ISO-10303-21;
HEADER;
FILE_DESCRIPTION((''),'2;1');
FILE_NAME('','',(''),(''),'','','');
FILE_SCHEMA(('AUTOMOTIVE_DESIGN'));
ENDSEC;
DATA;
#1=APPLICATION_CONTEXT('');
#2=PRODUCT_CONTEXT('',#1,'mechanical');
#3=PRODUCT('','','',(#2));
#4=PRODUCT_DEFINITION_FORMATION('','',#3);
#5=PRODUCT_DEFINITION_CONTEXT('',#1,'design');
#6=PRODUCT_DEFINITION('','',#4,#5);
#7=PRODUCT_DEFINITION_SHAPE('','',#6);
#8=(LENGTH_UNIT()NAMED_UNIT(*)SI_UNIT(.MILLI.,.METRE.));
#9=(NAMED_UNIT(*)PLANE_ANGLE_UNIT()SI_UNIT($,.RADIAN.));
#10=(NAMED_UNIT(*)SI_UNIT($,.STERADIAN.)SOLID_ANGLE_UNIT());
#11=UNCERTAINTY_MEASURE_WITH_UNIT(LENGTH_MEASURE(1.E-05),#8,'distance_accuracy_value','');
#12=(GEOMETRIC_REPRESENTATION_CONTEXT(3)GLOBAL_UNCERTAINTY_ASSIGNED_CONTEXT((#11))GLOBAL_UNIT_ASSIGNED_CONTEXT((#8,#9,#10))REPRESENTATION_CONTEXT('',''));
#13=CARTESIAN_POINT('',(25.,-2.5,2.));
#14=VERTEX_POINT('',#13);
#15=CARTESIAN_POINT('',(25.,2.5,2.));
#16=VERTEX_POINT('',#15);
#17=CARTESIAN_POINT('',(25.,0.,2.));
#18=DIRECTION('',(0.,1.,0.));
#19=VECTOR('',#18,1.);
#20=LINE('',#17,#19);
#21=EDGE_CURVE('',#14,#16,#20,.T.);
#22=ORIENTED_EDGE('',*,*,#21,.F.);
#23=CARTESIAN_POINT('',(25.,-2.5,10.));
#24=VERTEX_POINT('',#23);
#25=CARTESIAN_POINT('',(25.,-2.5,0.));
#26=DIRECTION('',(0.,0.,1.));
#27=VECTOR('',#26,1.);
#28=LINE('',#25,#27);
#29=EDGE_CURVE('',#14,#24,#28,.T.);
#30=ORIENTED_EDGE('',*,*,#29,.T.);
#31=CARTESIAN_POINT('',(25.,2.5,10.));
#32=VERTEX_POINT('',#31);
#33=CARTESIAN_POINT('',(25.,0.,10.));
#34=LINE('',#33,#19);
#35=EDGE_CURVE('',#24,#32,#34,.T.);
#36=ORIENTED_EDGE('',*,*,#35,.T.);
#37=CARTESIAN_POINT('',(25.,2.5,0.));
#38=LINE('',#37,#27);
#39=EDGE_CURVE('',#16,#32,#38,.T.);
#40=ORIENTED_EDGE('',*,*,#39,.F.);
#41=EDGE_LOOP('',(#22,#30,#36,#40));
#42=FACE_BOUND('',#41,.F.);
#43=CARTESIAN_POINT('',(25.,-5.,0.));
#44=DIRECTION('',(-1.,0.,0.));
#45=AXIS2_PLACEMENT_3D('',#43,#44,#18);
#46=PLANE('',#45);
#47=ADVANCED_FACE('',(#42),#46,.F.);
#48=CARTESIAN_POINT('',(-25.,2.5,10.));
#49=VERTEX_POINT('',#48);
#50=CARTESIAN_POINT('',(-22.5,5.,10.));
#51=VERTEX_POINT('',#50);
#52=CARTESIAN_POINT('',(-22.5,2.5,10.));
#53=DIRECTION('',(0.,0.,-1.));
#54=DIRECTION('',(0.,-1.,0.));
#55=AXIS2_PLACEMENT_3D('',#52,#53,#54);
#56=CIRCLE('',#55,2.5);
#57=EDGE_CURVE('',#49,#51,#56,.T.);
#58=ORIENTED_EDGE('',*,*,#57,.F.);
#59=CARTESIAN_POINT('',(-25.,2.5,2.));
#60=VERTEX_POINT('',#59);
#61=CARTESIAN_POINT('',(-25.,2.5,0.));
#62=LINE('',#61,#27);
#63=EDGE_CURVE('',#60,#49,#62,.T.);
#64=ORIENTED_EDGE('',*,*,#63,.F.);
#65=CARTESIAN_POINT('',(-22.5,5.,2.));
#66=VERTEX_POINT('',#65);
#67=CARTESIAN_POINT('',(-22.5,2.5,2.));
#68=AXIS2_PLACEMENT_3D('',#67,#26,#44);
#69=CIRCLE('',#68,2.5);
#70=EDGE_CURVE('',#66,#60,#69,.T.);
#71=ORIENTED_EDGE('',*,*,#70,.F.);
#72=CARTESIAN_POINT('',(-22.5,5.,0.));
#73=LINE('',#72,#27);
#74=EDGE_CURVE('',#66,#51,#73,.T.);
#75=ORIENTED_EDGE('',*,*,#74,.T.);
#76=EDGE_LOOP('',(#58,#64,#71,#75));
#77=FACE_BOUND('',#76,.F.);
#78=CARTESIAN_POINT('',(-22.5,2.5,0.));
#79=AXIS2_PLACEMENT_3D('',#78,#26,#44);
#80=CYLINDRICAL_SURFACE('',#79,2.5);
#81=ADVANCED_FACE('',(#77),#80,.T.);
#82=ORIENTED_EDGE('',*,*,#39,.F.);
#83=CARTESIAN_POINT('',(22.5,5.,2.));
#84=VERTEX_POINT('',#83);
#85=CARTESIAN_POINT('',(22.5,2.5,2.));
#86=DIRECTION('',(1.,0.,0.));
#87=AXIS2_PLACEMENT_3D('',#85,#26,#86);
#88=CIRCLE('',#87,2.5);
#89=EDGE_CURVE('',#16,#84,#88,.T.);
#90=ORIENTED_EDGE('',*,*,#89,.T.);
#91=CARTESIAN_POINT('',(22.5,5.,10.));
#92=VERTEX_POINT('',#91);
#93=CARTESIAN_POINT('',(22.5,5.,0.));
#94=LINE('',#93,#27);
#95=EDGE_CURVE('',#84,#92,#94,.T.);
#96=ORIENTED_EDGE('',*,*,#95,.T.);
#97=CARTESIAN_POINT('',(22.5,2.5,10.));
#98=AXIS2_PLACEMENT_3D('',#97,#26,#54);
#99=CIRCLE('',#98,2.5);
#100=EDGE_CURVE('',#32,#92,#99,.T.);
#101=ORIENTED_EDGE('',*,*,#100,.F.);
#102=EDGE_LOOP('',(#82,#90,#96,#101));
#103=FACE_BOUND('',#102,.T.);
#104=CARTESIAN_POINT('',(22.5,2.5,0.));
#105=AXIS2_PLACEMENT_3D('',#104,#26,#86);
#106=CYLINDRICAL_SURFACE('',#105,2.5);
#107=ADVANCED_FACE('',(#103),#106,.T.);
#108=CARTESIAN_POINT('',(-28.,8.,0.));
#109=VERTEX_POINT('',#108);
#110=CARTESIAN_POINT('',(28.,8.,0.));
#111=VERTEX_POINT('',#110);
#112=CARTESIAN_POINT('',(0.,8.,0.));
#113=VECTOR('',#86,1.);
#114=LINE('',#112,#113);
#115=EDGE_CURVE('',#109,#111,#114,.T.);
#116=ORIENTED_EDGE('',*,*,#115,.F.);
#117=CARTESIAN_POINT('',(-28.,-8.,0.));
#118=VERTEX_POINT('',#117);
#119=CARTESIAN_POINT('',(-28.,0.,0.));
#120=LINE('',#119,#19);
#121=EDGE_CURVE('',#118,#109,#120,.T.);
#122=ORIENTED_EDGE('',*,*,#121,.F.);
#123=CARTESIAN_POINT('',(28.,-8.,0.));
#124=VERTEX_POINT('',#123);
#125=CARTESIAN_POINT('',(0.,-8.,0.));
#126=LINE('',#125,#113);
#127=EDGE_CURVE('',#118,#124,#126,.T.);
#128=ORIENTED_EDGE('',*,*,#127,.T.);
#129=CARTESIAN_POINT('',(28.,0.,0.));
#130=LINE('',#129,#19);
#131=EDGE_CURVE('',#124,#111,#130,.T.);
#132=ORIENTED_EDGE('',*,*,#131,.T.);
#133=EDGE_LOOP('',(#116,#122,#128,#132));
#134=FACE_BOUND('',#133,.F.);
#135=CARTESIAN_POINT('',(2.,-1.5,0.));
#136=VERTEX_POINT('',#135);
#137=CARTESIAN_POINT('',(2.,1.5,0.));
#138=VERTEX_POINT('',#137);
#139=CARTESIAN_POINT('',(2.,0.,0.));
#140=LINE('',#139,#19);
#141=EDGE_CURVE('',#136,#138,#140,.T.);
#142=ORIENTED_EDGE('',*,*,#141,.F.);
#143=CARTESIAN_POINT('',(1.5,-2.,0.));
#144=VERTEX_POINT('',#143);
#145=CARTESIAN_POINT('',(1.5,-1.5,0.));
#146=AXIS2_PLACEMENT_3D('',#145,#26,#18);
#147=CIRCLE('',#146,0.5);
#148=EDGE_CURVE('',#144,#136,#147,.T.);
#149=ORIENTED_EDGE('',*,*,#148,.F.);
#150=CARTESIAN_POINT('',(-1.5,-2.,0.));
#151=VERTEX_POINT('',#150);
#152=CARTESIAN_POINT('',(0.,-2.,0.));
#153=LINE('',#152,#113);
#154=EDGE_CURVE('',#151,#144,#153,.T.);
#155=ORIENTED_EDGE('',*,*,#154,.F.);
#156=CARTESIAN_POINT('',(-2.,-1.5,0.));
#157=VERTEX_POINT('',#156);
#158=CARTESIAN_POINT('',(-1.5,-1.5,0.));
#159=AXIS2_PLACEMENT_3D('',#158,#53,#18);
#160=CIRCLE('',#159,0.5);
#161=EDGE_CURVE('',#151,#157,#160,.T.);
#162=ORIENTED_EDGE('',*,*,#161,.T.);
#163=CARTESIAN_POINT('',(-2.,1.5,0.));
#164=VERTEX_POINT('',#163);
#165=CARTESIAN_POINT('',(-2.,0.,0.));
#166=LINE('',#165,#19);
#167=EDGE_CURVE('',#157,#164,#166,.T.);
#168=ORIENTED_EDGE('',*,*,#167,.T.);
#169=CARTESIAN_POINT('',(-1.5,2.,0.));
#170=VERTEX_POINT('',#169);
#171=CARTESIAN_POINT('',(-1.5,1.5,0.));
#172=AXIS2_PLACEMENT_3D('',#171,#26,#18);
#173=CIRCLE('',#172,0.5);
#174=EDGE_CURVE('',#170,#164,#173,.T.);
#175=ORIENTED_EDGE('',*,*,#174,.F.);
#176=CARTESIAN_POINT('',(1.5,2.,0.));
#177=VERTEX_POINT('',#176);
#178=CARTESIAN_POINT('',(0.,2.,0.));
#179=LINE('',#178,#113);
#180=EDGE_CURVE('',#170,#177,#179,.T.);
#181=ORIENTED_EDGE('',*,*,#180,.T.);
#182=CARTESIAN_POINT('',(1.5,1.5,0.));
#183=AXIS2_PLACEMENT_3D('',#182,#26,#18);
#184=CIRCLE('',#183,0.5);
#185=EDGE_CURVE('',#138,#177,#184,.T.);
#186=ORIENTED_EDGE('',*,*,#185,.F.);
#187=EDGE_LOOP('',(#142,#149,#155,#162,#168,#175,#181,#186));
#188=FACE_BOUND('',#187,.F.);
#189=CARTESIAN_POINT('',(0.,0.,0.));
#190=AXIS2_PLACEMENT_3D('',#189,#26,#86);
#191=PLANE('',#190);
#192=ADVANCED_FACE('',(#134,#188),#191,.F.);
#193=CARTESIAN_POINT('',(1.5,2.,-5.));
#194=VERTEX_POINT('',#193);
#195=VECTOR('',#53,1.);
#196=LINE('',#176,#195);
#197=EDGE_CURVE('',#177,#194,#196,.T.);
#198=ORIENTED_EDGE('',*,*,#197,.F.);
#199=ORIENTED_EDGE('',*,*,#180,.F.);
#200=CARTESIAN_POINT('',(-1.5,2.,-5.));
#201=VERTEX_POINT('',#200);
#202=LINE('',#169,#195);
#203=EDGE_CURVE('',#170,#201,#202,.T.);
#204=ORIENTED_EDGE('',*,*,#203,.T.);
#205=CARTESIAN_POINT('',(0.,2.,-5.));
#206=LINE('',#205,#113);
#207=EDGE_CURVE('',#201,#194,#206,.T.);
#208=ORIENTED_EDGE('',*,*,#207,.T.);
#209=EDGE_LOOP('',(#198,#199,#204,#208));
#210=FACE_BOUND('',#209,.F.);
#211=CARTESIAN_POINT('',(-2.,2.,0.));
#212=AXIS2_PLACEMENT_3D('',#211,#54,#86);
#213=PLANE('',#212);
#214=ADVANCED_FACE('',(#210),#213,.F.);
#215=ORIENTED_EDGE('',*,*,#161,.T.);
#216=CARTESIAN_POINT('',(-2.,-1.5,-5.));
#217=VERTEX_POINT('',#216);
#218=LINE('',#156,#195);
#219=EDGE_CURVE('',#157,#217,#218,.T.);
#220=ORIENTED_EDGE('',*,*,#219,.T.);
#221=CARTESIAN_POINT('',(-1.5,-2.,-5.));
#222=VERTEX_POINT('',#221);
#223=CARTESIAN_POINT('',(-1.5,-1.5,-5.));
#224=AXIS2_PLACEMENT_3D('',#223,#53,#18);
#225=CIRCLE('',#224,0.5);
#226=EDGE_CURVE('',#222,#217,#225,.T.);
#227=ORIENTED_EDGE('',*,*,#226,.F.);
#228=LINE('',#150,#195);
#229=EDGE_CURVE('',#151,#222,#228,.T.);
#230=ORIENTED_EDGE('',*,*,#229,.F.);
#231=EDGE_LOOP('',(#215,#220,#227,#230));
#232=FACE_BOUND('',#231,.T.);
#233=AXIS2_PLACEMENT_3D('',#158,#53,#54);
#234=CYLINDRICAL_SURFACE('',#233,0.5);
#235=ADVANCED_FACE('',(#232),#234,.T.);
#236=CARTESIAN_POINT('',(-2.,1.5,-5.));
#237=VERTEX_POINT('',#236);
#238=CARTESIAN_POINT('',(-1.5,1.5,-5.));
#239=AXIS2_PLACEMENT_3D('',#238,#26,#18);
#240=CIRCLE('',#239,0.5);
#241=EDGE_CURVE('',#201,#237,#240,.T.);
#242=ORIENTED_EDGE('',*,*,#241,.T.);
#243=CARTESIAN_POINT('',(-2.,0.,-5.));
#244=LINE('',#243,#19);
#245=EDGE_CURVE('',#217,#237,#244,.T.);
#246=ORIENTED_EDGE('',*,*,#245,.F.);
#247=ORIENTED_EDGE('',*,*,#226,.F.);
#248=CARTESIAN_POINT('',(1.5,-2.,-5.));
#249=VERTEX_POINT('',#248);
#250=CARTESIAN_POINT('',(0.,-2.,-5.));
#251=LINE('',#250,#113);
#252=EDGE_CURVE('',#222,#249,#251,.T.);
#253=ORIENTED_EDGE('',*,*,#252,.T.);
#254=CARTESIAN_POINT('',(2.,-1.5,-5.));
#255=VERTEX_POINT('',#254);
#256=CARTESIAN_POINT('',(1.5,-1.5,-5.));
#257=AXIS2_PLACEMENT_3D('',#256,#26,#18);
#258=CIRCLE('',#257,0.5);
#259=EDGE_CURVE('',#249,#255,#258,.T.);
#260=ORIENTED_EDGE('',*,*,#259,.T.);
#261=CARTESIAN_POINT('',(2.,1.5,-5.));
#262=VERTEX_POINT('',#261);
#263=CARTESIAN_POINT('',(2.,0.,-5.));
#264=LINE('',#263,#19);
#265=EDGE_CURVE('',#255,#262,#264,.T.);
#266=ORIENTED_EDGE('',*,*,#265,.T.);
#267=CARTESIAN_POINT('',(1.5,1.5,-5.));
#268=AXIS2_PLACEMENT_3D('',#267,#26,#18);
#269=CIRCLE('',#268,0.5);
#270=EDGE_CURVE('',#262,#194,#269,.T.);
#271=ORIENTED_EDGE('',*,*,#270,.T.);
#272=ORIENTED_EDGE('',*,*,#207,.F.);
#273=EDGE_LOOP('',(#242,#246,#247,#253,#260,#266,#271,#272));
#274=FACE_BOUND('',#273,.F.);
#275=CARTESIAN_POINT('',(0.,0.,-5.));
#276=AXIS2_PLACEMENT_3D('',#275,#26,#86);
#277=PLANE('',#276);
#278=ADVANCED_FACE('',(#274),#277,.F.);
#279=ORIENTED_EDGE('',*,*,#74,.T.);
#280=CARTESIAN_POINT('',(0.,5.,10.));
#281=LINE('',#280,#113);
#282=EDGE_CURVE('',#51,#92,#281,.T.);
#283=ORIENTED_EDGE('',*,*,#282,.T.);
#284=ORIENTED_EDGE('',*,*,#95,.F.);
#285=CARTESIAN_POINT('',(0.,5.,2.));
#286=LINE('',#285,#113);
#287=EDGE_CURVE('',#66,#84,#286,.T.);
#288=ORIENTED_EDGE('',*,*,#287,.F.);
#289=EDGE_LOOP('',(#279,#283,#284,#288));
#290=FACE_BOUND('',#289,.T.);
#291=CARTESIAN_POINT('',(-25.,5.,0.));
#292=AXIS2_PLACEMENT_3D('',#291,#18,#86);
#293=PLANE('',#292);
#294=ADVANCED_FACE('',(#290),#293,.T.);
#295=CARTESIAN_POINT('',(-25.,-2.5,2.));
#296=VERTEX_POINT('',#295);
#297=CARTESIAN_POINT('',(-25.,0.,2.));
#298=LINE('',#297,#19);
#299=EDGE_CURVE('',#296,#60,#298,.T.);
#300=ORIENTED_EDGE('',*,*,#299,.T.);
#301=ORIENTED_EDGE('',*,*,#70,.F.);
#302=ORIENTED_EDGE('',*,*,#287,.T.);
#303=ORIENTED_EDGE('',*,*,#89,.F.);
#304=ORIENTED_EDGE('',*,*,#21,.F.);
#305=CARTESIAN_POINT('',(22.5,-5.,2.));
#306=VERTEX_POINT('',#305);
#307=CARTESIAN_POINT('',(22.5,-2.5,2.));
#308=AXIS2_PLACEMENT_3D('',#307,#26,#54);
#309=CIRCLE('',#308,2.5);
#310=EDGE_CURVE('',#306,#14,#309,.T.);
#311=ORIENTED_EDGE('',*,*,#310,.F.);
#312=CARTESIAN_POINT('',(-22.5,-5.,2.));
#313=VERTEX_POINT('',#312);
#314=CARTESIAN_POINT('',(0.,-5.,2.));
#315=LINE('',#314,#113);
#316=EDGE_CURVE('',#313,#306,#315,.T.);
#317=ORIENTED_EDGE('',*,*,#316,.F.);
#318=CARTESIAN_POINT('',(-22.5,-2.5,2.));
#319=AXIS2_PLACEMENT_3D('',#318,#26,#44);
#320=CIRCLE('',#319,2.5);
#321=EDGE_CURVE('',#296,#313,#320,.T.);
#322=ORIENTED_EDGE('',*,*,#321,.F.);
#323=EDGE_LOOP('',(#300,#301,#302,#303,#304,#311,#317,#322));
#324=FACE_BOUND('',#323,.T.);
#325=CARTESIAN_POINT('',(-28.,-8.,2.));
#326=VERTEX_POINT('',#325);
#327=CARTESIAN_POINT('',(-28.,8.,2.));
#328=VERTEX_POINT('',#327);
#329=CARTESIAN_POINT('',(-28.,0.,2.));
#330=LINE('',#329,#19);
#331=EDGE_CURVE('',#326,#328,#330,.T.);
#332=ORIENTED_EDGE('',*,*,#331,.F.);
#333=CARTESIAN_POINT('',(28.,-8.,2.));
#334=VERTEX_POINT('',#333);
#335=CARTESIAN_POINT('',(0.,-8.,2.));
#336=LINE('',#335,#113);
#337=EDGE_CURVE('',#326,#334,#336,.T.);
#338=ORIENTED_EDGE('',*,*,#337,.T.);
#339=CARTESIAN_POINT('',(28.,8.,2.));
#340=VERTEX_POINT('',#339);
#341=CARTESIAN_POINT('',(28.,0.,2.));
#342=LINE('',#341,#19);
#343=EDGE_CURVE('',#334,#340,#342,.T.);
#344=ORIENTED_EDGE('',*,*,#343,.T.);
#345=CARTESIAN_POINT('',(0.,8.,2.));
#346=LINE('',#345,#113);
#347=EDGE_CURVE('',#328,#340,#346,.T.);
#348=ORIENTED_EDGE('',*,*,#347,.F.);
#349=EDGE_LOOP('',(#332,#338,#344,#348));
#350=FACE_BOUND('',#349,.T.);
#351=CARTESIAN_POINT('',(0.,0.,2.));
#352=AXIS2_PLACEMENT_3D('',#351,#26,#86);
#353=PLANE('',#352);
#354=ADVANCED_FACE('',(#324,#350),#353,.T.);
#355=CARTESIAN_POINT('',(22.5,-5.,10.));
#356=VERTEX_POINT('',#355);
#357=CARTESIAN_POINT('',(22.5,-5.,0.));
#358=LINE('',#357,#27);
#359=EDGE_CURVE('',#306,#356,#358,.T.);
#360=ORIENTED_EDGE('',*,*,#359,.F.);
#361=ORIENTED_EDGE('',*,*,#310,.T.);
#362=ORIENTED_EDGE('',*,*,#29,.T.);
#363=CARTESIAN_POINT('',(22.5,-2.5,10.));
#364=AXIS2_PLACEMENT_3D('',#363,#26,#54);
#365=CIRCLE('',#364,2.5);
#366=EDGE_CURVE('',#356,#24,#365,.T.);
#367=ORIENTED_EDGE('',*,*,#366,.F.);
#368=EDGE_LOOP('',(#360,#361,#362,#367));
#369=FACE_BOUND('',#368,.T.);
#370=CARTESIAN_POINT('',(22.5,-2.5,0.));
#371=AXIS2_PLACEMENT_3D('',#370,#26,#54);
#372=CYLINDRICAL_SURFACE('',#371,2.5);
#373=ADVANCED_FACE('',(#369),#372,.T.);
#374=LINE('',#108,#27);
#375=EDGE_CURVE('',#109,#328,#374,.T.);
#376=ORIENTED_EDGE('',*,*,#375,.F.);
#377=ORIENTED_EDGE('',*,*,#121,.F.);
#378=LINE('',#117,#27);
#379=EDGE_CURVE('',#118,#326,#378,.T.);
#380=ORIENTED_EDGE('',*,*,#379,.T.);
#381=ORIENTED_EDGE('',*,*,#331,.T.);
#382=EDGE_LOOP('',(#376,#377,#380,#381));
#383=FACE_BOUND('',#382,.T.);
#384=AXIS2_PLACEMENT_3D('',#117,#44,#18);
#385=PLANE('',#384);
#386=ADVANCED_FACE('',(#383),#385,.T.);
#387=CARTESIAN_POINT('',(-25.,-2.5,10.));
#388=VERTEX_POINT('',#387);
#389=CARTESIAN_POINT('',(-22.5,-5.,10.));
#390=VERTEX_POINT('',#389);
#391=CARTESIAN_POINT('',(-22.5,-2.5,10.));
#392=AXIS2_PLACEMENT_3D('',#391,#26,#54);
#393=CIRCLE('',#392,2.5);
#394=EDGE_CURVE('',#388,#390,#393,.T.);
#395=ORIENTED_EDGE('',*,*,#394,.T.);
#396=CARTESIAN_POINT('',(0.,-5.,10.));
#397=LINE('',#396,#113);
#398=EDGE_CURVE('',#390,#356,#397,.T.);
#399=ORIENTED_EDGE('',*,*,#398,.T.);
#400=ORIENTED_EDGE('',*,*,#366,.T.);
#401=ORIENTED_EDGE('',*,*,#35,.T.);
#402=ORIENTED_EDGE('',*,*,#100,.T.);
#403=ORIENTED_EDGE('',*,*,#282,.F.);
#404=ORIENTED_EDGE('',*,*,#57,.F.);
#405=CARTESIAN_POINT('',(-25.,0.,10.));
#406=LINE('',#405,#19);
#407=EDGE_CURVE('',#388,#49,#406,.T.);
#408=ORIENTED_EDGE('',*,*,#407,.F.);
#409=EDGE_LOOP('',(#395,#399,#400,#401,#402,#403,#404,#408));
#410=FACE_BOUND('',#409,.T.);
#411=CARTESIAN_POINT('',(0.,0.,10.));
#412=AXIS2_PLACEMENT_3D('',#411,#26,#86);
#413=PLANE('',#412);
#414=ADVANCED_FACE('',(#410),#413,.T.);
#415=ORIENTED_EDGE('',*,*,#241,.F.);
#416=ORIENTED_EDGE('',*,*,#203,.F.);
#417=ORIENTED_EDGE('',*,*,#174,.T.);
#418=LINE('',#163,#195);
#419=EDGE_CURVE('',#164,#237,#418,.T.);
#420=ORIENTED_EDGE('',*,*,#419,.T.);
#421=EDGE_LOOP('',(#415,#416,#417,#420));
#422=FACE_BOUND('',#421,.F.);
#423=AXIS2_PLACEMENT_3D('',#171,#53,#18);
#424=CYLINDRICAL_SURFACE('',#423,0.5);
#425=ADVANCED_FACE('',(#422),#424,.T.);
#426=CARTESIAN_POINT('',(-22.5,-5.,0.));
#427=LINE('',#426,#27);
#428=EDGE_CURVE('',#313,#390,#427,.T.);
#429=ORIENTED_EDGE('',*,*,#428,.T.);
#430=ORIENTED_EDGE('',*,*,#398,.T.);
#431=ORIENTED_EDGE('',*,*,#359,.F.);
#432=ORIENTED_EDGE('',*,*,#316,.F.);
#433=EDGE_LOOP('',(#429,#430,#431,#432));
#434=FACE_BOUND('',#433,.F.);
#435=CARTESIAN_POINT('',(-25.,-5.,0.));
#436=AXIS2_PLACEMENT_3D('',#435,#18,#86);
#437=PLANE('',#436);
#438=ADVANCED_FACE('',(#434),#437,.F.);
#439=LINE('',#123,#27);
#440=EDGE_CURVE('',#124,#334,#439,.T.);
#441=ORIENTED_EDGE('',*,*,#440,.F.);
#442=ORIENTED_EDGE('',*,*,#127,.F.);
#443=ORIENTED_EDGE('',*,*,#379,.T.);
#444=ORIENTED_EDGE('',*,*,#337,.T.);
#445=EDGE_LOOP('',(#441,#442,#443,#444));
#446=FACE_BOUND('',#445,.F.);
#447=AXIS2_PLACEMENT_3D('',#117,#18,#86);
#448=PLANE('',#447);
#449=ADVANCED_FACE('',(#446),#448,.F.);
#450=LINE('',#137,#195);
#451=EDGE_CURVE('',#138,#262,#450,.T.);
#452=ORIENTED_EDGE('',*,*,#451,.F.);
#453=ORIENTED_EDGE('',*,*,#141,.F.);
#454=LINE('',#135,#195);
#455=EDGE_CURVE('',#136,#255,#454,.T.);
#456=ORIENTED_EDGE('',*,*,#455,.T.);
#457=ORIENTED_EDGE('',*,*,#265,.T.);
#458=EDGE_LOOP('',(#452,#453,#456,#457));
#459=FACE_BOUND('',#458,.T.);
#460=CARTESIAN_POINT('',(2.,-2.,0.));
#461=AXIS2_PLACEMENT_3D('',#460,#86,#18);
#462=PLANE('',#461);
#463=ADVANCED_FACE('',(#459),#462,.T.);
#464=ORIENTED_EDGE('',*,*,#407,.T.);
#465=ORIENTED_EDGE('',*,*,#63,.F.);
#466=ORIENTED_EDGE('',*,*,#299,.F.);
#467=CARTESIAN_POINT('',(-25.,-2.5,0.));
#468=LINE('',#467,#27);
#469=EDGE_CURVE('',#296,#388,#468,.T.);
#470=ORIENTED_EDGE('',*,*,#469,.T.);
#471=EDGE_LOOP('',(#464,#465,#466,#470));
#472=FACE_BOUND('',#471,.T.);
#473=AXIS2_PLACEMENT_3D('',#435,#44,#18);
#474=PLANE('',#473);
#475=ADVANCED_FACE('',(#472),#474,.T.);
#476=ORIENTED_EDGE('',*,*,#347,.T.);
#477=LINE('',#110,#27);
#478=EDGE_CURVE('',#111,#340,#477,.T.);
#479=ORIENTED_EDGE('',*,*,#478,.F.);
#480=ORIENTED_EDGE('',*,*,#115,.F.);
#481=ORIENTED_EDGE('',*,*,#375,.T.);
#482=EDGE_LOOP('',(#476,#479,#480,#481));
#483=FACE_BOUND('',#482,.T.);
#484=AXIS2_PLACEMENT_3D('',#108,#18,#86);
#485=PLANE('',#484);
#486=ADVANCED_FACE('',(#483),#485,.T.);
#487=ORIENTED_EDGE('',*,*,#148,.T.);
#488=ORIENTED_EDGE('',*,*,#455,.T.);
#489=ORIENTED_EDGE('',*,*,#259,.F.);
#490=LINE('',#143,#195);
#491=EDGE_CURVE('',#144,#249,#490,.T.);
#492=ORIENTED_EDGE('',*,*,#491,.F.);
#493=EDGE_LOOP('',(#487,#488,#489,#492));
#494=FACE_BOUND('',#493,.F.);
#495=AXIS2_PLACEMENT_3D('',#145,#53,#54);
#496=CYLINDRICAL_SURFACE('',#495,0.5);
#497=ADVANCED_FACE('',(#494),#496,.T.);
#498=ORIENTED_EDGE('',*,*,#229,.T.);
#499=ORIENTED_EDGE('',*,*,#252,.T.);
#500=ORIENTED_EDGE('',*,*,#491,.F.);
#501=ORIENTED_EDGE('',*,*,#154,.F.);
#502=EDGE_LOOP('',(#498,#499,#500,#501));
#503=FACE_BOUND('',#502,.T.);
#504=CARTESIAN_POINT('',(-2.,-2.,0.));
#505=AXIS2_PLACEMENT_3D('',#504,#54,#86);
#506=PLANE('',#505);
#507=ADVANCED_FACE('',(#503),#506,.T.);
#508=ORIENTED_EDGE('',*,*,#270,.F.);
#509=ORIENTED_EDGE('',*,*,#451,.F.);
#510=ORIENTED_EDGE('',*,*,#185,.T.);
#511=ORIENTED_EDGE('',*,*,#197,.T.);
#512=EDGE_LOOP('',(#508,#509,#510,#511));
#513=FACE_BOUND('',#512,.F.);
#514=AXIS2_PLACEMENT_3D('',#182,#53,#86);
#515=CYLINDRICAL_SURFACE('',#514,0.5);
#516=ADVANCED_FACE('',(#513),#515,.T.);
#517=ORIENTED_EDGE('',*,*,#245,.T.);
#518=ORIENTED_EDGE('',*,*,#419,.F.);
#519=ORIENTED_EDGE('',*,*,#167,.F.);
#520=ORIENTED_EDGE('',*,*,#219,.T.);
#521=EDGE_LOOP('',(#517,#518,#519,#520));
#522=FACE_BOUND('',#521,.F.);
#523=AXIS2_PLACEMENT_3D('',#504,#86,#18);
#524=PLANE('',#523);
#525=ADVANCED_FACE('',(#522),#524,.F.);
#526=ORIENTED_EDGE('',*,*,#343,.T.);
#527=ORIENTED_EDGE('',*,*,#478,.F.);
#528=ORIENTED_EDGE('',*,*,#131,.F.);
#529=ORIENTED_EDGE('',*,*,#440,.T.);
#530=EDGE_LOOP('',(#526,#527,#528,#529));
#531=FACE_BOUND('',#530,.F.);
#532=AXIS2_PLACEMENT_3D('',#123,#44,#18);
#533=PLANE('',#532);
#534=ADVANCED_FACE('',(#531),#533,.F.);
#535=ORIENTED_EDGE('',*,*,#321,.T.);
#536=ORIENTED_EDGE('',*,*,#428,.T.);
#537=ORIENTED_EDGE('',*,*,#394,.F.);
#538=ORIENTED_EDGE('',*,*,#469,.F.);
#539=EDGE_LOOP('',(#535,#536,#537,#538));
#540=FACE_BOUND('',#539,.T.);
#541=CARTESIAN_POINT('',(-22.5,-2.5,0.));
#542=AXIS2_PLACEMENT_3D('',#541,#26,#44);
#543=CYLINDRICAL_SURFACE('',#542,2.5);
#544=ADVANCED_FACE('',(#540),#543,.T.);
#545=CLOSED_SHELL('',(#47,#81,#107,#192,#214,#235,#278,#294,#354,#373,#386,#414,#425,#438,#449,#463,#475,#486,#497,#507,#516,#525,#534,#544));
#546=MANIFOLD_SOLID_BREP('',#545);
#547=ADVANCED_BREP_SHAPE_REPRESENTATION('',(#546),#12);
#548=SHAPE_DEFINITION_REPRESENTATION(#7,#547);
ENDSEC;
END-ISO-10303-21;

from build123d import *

# Parameters (mm, degrees)
F0_W     = 50
F0_H     = 10
F0_W_2   = 4
F0_H_2   = 4
F0_R     = 1.6
F1_DEPTH = 10
F2_R     = 2.5
F0_W_3   = 56
F0_H_3   = 16
F3_DEPTH = 2
F4_DEPTH = 2
F5_DEPTH = 5
F7_R     = 0.5


# Not quite as in the source:
# - the program builds the solid bodies; features that only make, move or delete a surface that nothing else refers to are left out


with BuildPart() as f1:
    # F0 (on Top) → F1 (new body)
    with BuildSketch(Plane.XY):
        Rectangle(F0_W, F0_H)
        Rectangle(F0_W_2, F0_H_2, mode=Mode.SUBTRACT)
        Rectangle(F0_W_2, F0_H_2)
        Circle(F0_R, mode=Mode.SUBTRACT)
        Circle(F0_R)
    extrude(amount=F1_DEPTH)

    # F2
    f2_edges = [f1.edges().sort_by_distance(p)[0] for p in [
        (-25, -5, 5),
        (-25, 5, 5),
        (25, -5, 5),
        (25, 5, 5),
    ]]
    fillet(f2_edges, radius=F2_R)

    # F0 (on Top) → F3 (join)
    with BuildSketch(Plane.XY):
        Rectangle(F0_W_3, F0_H_3)
        Rectangle(F0_W, F0_H, mode=Mode.SUBTRACT)
    extrude(amount=F3_DEPTH)

    # F0 (on Top) → F4 (join)
    with BuildSketch(Plane.XY):
        Rectangle(F0_W, F0_H)
        Rectangle(F0_W_2, F0_H_2, mode=Mode.SUBTRACT)
    extrude(amount=F4_DEPTH)

    # F0 (on Top) → F5 (join)
    with BuildSketch(Plane.XY):
        Rectangle(F0_W_2, F0_H_2)
        Circle(F0_R, mode=Mode.SUBTRACT)
        Circle(F0_R)
    extrude(amount=-F5_DEPTH)

    # F7
    f7_edges = [f1.edges().sort_by_distance(p)[0] for p in [
        (-2, -2, -2.5),
        (2, -2, -2.5),
        (-2, 2, -2.5),
        (2, 2, -2.5),
    ]]
    fillet(f7_edges, radius=F7_R)


solid = f1.part
